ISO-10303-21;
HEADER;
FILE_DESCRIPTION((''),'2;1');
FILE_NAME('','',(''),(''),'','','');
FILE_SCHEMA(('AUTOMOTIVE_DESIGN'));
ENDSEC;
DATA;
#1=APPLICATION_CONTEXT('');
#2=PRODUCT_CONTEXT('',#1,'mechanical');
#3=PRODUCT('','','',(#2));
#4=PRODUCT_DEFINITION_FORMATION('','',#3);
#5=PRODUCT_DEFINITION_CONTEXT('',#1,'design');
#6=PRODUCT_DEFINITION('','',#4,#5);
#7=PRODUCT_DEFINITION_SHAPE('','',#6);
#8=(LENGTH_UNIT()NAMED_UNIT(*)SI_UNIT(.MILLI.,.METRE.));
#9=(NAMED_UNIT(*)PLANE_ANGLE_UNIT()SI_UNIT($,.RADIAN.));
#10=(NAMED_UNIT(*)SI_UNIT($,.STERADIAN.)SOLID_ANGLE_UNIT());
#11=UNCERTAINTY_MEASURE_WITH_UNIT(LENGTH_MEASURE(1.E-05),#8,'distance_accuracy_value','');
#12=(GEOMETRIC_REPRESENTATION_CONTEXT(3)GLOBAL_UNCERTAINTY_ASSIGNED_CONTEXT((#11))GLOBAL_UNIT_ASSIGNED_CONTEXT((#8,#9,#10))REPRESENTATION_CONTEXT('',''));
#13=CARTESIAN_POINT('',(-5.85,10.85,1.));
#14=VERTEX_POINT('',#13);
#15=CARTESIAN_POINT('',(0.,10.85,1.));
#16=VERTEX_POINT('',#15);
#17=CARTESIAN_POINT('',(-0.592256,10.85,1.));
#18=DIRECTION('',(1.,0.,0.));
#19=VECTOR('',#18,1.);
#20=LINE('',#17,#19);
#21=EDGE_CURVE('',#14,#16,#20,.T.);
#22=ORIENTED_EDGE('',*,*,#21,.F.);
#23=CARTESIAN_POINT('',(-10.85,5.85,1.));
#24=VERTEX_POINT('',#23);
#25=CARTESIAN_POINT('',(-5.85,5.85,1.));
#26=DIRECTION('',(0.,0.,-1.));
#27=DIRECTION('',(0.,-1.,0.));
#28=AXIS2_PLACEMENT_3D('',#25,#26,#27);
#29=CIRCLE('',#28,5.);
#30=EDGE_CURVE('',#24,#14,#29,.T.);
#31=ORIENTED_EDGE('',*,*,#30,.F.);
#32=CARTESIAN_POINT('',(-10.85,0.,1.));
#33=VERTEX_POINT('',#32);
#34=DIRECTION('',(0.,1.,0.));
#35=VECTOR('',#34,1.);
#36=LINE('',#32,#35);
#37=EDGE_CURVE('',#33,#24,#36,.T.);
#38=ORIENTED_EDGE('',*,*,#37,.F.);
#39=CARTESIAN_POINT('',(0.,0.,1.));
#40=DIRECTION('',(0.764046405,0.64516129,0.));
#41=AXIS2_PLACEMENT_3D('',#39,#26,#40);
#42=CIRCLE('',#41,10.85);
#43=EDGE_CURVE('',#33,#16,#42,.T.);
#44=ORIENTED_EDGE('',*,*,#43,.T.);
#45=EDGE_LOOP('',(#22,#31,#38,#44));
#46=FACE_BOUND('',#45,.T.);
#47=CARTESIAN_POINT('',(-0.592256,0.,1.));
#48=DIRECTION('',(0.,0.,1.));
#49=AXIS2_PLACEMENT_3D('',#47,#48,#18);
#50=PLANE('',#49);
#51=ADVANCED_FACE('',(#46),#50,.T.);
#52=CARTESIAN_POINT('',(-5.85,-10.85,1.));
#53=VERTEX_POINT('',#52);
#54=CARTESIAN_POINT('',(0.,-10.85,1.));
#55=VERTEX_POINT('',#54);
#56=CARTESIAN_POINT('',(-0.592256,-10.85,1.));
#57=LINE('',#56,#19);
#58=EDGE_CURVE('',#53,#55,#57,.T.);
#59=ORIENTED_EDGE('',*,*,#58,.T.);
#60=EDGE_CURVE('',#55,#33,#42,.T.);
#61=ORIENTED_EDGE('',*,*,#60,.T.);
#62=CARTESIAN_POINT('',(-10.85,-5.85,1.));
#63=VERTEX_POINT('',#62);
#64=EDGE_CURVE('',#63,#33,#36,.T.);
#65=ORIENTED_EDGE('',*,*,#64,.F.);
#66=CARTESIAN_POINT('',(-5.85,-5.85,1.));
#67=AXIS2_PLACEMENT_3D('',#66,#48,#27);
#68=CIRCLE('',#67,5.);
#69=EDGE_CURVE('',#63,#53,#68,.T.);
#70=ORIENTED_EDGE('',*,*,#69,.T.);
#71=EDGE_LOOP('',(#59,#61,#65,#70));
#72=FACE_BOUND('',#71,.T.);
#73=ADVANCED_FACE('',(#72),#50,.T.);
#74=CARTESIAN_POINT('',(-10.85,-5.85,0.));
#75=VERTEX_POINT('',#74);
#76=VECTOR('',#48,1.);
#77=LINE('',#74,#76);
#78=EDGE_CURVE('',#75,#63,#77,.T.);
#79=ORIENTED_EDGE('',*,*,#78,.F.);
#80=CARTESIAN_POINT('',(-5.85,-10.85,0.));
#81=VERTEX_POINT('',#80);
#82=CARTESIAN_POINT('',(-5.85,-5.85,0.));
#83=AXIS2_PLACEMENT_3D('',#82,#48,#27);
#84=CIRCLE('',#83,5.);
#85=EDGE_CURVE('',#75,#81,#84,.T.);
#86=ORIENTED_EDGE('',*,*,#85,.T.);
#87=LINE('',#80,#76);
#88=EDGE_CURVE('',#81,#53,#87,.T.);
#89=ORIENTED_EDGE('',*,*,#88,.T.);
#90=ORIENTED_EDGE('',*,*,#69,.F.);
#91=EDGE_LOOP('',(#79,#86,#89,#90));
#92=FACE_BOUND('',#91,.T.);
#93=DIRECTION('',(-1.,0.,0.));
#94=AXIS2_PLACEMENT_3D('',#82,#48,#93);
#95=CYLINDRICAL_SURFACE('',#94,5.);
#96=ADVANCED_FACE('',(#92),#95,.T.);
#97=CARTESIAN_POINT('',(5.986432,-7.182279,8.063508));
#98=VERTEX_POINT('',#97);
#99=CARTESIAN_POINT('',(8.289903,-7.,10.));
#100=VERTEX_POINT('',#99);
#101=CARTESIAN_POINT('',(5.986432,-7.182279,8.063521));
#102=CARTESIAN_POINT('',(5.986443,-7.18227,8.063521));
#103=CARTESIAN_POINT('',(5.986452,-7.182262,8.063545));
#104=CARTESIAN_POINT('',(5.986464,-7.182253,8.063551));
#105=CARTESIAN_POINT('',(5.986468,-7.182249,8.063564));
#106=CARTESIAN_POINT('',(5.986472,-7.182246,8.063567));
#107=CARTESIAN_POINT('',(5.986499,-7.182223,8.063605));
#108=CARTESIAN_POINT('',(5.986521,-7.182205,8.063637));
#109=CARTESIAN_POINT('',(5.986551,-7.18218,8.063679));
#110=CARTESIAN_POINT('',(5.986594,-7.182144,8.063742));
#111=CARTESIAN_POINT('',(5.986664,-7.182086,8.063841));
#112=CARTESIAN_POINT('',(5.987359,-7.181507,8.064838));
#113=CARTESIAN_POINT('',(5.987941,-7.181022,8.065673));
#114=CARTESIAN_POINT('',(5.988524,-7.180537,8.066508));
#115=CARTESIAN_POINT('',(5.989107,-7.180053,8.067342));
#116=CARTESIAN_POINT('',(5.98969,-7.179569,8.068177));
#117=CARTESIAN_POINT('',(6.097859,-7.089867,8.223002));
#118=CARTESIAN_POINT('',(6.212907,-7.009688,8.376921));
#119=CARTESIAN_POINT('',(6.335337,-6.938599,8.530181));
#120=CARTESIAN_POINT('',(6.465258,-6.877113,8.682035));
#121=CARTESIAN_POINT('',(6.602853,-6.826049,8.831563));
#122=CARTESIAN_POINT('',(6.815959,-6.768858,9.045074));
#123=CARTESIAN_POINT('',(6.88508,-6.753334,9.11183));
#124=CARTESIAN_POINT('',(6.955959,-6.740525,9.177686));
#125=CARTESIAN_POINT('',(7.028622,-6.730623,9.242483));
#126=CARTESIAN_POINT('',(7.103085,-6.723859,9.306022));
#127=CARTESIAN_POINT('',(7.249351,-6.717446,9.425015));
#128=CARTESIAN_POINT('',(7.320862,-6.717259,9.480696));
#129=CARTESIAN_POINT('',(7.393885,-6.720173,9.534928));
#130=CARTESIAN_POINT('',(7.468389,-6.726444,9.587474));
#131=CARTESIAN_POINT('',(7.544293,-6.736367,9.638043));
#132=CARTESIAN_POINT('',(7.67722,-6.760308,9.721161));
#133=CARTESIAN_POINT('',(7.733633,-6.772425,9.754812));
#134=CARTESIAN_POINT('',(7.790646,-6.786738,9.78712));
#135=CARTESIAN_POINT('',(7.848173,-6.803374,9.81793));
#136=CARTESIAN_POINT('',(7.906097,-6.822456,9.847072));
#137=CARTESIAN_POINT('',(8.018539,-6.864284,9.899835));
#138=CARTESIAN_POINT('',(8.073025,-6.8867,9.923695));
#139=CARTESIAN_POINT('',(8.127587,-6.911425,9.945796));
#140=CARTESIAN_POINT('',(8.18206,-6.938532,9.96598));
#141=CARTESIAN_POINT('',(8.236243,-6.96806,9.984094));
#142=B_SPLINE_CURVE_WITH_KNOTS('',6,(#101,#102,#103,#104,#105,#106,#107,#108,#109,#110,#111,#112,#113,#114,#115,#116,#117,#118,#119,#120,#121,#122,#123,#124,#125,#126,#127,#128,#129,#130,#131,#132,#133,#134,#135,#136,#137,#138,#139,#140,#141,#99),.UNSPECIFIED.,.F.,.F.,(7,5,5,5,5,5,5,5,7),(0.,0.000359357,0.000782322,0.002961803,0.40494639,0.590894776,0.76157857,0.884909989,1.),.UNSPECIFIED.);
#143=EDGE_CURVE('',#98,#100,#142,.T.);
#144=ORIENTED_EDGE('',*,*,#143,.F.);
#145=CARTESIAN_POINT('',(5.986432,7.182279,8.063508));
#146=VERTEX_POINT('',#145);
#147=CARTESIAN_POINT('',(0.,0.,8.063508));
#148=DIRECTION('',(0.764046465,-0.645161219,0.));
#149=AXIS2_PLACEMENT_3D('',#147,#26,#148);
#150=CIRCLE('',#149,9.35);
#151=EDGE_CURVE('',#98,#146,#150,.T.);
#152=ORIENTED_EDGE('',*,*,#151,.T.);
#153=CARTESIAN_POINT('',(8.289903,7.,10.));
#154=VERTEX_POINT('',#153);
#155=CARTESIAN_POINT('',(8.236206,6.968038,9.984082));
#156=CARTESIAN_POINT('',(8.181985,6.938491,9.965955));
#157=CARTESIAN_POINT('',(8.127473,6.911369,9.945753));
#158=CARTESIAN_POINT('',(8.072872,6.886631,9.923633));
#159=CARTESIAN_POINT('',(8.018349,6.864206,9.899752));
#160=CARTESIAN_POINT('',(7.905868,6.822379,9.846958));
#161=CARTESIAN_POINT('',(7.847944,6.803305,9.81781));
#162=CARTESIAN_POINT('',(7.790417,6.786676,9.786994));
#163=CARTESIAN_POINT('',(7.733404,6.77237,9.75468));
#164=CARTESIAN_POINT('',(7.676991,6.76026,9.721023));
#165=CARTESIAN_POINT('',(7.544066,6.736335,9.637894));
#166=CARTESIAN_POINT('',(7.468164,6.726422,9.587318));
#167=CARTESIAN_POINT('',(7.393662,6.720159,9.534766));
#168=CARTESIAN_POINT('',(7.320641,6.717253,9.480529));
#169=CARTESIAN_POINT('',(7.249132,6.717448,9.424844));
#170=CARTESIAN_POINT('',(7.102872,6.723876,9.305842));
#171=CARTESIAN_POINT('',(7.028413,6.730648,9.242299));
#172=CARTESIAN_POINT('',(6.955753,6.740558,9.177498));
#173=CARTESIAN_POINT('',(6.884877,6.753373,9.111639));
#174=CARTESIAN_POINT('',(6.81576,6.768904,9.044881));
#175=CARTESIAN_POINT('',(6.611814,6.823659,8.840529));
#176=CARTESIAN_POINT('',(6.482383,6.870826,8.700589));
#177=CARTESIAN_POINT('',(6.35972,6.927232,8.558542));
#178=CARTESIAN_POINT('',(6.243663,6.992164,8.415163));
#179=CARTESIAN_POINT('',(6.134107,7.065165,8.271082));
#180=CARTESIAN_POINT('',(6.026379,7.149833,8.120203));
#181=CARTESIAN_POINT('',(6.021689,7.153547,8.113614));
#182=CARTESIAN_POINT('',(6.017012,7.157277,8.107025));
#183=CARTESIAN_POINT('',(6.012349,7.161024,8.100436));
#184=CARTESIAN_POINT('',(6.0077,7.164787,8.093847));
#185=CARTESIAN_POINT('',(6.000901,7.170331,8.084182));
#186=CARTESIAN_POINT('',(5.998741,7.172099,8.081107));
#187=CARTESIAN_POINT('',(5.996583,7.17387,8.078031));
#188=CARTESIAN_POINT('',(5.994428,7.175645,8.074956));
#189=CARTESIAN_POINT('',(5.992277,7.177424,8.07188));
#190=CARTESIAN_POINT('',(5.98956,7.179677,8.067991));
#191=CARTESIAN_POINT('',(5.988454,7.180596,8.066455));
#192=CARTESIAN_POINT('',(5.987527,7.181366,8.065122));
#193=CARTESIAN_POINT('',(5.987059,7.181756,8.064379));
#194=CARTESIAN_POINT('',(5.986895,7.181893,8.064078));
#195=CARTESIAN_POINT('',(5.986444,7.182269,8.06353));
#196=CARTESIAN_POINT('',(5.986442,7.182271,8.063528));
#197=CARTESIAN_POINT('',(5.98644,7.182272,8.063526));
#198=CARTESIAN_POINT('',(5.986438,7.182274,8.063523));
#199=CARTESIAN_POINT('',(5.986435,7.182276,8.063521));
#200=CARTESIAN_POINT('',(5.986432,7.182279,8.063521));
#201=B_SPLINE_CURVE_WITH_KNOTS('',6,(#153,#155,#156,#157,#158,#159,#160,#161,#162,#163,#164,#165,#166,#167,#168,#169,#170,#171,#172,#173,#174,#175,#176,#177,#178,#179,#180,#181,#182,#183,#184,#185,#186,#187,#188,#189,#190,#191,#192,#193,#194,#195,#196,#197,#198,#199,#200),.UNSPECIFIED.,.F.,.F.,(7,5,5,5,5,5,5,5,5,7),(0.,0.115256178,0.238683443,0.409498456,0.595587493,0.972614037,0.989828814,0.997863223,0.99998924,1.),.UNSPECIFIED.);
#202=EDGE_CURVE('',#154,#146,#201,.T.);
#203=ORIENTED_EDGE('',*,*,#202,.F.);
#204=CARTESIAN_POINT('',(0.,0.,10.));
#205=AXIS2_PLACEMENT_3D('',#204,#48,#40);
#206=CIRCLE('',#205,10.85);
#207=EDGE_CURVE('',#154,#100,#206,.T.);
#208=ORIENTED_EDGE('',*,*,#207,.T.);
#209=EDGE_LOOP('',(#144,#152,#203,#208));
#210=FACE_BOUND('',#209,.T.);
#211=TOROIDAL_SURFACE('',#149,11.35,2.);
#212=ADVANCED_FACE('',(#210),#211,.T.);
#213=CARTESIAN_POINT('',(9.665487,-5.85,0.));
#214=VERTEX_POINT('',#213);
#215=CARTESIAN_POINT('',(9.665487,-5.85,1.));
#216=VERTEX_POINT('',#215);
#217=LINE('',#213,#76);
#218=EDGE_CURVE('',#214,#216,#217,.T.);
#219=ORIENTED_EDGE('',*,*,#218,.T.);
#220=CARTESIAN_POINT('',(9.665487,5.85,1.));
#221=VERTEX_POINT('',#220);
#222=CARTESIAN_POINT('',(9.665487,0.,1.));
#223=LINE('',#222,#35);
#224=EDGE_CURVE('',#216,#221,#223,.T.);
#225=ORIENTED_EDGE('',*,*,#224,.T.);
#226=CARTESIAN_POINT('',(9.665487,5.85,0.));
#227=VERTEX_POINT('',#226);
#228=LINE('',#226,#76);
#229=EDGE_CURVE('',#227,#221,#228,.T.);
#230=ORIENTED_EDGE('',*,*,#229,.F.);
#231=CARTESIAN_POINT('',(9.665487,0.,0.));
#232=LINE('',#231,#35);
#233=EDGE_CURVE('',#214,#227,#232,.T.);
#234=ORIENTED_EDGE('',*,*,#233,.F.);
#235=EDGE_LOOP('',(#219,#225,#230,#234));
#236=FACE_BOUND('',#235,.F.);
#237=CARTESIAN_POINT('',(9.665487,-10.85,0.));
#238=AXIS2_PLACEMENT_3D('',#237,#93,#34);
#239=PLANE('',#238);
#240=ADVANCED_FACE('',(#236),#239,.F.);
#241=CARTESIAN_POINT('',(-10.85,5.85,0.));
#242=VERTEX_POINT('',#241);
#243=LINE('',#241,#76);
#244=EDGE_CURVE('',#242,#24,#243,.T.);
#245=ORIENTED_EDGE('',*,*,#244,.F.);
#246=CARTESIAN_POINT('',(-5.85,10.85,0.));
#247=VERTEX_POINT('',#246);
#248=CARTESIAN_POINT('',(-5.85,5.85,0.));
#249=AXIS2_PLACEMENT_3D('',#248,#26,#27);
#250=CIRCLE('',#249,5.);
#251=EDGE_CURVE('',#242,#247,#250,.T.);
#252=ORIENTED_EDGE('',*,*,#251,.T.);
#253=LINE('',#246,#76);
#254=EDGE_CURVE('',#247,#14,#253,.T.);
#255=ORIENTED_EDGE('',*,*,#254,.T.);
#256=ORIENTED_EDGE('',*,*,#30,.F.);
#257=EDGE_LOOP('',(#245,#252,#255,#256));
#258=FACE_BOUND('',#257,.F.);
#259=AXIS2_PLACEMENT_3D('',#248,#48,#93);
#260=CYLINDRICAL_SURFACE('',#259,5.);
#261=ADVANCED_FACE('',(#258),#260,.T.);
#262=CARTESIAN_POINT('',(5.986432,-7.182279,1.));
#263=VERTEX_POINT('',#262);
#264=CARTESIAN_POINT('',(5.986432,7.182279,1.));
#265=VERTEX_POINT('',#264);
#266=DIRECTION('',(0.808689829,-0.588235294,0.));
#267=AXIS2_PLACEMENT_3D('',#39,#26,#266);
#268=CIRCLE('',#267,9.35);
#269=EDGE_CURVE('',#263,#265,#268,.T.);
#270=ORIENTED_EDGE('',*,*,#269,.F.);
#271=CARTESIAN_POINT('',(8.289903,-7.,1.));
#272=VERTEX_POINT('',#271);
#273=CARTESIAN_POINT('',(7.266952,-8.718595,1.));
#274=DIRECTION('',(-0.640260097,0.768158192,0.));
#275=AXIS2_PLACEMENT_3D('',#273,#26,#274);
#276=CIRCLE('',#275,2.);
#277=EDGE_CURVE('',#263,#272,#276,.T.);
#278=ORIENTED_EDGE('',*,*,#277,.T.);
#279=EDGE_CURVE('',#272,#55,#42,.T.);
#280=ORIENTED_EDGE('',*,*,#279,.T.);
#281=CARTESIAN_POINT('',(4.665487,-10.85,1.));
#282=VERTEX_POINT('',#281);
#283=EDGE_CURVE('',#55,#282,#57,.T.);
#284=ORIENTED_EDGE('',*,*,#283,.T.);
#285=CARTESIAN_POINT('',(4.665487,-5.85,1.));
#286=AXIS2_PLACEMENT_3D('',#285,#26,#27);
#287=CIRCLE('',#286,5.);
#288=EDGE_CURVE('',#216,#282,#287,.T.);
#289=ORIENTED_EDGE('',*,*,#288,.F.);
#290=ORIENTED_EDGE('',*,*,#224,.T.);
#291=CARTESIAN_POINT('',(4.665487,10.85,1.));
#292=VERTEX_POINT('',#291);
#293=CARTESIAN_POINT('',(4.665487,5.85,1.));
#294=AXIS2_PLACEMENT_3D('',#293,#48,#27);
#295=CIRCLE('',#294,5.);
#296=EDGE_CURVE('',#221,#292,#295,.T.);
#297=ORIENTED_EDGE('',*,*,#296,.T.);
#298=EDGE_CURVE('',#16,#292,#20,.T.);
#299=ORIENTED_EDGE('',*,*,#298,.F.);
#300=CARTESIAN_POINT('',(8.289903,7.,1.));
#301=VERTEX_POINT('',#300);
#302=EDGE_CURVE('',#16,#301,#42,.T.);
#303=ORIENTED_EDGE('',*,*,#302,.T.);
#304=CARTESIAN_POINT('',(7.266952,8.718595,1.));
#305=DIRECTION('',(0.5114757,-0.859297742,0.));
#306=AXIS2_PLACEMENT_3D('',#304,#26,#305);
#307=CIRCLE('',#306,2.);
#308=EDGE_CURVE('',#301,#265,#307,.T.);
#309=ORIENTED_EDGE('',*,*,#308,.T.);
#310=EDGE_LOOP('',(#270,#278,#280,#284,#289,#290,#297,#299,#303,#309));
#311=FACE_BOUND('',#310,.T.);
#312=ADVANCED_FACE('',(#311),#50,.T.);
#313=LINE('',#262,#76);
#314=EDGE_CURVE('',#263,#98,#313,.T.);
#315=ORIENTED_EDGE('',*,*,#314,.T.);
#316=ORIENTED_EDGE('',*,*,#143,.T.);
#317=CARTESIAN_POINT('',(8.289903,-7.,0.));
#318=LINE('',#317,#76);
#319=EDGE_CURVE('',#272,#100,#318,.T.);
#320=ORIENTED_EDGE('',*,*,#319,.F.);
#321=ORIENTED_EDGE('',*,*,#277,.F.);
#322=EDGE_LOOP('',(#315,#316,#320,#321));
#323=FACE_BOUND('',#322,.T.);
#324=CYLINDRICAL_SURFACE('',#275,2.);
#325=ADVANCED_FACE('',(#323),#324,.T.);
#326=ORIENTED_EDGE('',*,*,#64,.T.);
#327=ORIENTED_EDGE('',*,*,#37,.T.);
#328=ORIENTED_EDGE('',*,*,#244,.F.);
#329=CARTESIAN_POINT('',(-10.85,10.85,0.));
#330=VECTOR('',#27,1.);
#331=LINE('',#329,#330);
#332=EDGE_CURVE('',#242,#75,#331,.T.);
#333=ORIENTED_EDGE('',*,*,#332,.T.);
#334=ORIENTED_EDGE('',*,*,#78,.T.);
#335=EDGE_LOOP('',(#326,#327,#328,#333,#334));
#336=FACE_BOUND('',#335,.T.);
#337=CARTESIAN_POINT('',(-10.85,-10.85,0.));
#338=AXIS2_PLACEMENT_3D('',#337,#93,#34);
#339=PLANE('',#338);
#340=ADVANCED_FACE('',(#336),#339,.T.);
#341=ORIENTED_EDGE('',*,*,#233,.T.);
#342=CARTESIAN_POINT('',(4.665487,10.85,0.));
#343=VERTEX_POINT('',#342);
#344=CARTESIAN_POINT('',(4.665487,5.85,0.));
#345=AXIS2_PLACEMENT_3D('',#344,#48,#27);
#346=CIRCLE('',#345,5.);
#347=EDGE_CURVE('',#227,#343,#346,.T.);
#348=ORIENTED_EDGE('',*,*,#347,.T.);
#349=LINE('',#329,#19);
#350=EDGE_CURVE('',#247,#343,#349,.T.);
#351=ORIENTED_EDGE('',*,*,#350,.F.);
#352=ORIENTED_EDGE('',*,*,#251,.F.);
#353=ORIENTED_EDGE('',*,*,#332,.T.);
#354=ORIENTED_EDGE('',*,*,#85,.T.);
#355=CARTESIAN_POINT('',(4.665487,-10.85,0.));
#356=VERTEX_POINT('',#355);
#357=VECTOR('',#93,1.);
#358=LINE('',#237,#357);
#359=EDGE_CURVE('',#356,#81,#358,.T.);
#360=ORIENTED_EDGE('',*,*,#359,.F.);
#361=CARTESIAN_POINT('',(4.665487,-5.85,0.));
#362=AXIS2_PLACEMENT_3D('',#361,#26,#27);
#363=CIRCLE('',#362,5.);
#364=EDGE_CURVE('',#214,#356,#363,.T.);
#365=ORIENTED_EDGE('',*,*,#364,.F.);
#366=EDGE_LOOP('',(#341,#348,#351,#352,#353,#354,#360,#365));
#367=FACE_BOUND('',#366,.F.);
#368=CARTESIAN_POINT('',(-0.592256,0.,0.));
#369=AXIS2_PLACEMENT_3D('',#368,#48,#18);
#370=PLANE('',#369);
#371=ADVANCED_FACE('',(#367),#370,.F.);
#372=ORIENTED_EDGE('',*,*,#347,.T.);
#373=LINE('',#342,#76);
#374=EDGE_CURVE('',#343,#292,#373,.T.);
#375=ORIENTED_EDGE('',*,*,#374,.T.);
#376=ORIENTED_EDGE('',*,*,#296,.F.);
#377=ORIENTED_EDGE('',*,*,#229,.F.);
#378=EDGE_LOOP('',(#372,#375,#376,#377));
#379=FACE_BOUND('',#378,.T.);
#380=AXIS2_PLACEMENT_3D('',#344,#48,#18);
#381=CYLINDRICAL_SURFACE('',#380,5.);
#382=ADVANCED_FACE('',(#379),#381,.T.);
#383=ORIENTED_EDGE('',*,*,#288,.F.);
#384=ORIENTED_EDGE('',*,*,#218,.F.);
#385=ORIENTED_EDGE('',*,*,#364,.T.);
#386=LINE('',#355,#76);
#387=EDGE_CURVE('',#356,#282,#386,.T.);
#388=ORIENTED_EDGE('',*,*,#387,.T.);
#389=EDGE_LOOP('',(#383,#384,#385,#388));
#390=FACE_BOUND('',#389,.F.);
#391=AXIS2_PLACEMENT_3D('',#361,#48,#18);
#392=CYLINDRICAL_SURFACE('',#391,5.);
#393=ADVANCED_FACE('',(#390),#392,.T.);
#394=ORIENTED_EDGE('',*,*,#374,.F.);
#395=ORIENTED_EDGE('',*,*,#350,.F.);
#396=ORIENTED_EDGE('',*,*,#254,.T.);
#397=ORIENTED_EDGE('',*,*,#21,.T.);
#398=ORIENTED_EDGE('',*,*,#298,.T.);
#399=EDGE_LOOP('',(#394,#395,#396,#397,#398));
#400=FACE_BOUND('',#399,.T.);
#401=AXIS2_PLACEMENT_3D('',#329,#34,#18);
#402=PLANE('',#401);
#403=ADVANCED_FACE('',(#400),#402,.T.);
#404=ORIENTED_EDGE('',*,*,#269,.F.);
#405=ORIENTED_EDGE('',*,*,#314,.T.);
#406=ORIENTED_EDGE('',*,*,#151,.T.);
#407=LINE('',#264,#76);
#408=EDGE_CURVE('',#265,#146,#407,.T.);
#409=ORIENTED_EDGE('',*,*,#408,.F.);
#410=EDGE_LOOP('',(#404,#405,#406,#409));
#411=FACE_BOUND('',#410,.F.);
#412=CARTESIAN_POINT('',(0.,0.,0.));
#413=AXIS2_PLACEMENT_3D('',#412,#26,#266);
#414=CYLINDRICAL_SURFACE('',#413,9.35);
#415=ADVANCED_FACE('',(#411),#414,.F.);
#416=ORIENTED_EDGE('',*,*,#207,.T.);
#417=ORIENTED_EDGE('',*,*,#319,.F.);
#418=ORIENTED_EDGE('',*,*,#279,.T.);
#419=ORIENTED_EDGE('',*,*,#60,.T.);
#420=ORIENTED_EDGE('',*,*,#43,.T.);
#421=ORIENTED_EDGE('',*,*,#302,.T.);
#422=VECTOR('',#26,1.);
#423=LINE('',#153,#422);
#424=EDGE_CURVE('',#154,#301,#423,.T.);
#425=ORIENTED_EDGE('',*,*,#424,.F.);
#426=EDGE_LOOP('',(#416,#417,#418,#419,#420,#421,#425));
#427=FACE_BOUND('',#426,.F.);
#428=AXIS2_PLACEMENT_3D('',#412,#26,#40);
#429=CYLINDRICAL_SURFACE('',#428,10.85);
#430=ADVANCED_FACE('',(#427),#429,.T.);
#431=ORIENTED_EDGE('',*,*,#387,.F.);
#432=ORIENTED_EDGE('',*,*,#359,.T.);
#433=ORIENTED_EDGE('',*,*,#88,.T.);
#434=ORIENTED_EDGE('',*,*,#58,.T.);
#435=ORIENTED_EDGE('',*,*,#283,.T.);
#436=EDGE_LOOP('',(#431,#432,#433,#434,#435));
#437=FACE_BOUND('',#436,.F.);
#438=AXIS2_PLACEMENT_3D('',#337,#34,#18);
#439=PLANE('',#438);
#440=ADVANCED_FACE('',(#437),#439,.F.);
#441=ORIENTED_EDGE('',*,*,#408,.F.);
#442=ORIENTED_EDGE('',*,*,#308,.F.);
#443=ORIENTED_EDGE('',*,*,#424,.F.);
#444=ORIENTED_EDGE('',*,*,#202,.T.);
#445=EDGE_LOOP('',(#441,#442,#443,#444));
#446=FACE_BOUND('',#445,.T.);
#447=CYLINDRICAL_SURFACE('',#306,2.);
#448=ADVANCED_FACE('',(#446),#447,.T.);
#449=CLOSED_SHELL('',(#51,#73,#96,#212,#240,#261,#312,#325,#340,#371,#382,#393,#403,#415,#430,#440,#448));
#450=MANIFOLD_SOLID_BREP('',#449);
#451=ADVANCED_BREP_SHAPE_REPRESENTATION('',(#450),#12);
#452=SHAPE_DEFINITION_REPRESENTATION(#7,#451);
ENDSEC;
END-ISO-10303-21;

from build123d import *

# Parameters (mm, degrees)
F2_DEPTH    = 10
F3_W        = 20.5154874287
F3_H        = 21.7
F4_DEPTH    = 1
F5_R        = 5
F7_T1_DEPTH = 14.7609215151
F7_T4_ANGLE = 34.9116466648
F7_T6_ANGLE = 279.6444662417
F7_T8_ANGLE = 34.9116520269


# Not quite as in the source:
# - a fillet or chamfer that OpenCascade refuses, or shapes differently, is made with other operations: its cross-section is extruded or revolved along the edge and cut away or added


with BuildPart() as f2:
    # F0 (on Top) → F2 (new body)
    with BuildSketch(Plane.XY):
        with BuildLine():
            ThreePointArc((7.5612498967, -5.5), (-9.35, 0), (7.5612498967, 5.5))
            Line((7.5612498967, 5.5), (8.2899034976, 7))
            ThreePointArc((8.2899034976, 7), (-10.85, 0), (8.2899034976, -7))
            Line((8.2899034976, -7), (7.5612498967, -5.5))
        make_face()
    extrude(amount=F2_DEPTH)

    # F3 (on Top) → F4 (join)
    with BuildSketch(Plane.XY):
        with Locations((-0.5922562857, 0)):
            Rectangle(F3_W, F3_H)
    extrude(amount=F4_DEPTH)

    # F5
    f5_edges = [f2.edges().sort_by_distance(p)[0] for p in [
        (-10.85, -10.85, 0.5),
        (9.665487, -10.85, 0.5),
        (-10.85, 10.85, 0.5),
        (9.665487, 10.85, 0.5),
    ]]
    fillet(f5_edges, radius=F5_R)

    # F7: fillet of radius 2 on 3 edges, made by hand

    # F7_s2 → F7_t1 (cut)
    with BuildSketch(Plane.XY.offset(1)):
        with BuildLine():
            ThreePointArc((8.2899034976, 7), (7.1091806232, 6.7248281543), (5.9864319049, 7.1822790985))
            ThreePointArc((5.9864319049, 7.1822790985), (6.8258652411, 6.3898406639), (7.5612498967, 5.5))
            Line((7.5612498967, 5.5), (8.2899034976, 7))
        make_face()
        with BuildLine():
            ThreePointArc((5.9864319049, -7.1822790985), (7.1091806232, -6.7248281543), (8.2899034976, -7))
            Line((8.2899034976, -7), (7.5612498967, -5.5))
            ThreePointArc((7.5612498967, -5.5), (6.8258652411, -6.3898406639), (5.9864319049, -7.1822790985))
        make_face()
    extrude(amount=F7_T1_DEPTH, mode=Mode.SUBTRACT)

    # F7_s3 → F7_t4 (revolve, cut)
    with BuildSketch(Plane(origin=(0, 0, 0), x_dir=(0, 0, 1), z_dir=(0.091781739, 0.9957791484, 0))):
        with BuildLine():
            ThreePointArc((8, 9.35), (9.4142135624, 9.9357864376), (10, 11.35))
            Line((10, 11.35), (10, 9.35))
            Line((10, 9.35), (8, 9.35))
        make_face()
    revolve(axis=Axis((0, 0, 10), (0, 0, -1)), revolution_arc=F7_T4_ANGLE, mode=Mode.SUBTRACT)

    # F7_s5 → F7_t6 (revolve, cut)
    with BuildSketch(Plane(origin=(0, 0, 0), x_dir=(0, 0, 1), z_dir=(0.6451612191, 0.7640464655, 0))):
        with BuildLine():
            ThreePointArc((8.0635083269, 9.35), (9.2882531983, 9.7688611699), (10, 10.85))
            Line((10, 10.85), (10, 9.35))
            Line((10, 9.35), (8.0635083269, 9.35))
        make_face()
    revolve(axis=Axis((0, 0, 10), (0, 0, -1)), revolution_arc=F7_T6_ANGLE, mode=Mode.SUBTRACT)

    # F7_s7 → F7_t8 (revolve, cut)
    with BuildSketch(Plane(origin=(0, 0, 0), x_dir=(0, 0, 1), z_dir=(-0.6451612906, 0.7640464051, 0))):
        with BuildLine():
            ThreePointArc((8, 9.35), (9.4142135624, 9.9357864376), (10, 11.35))
            Line((10, 11.35), (10, 9.35))
            Line((10, 9.35), (8, 9.35))
        make_face()
    revolve(axis=Axis((0, 0, 10), (0, 0, -1)), revolution_arc=F7_T8_ANGLE, mode=Mode.SUBTRACT)


solid = f2.part
